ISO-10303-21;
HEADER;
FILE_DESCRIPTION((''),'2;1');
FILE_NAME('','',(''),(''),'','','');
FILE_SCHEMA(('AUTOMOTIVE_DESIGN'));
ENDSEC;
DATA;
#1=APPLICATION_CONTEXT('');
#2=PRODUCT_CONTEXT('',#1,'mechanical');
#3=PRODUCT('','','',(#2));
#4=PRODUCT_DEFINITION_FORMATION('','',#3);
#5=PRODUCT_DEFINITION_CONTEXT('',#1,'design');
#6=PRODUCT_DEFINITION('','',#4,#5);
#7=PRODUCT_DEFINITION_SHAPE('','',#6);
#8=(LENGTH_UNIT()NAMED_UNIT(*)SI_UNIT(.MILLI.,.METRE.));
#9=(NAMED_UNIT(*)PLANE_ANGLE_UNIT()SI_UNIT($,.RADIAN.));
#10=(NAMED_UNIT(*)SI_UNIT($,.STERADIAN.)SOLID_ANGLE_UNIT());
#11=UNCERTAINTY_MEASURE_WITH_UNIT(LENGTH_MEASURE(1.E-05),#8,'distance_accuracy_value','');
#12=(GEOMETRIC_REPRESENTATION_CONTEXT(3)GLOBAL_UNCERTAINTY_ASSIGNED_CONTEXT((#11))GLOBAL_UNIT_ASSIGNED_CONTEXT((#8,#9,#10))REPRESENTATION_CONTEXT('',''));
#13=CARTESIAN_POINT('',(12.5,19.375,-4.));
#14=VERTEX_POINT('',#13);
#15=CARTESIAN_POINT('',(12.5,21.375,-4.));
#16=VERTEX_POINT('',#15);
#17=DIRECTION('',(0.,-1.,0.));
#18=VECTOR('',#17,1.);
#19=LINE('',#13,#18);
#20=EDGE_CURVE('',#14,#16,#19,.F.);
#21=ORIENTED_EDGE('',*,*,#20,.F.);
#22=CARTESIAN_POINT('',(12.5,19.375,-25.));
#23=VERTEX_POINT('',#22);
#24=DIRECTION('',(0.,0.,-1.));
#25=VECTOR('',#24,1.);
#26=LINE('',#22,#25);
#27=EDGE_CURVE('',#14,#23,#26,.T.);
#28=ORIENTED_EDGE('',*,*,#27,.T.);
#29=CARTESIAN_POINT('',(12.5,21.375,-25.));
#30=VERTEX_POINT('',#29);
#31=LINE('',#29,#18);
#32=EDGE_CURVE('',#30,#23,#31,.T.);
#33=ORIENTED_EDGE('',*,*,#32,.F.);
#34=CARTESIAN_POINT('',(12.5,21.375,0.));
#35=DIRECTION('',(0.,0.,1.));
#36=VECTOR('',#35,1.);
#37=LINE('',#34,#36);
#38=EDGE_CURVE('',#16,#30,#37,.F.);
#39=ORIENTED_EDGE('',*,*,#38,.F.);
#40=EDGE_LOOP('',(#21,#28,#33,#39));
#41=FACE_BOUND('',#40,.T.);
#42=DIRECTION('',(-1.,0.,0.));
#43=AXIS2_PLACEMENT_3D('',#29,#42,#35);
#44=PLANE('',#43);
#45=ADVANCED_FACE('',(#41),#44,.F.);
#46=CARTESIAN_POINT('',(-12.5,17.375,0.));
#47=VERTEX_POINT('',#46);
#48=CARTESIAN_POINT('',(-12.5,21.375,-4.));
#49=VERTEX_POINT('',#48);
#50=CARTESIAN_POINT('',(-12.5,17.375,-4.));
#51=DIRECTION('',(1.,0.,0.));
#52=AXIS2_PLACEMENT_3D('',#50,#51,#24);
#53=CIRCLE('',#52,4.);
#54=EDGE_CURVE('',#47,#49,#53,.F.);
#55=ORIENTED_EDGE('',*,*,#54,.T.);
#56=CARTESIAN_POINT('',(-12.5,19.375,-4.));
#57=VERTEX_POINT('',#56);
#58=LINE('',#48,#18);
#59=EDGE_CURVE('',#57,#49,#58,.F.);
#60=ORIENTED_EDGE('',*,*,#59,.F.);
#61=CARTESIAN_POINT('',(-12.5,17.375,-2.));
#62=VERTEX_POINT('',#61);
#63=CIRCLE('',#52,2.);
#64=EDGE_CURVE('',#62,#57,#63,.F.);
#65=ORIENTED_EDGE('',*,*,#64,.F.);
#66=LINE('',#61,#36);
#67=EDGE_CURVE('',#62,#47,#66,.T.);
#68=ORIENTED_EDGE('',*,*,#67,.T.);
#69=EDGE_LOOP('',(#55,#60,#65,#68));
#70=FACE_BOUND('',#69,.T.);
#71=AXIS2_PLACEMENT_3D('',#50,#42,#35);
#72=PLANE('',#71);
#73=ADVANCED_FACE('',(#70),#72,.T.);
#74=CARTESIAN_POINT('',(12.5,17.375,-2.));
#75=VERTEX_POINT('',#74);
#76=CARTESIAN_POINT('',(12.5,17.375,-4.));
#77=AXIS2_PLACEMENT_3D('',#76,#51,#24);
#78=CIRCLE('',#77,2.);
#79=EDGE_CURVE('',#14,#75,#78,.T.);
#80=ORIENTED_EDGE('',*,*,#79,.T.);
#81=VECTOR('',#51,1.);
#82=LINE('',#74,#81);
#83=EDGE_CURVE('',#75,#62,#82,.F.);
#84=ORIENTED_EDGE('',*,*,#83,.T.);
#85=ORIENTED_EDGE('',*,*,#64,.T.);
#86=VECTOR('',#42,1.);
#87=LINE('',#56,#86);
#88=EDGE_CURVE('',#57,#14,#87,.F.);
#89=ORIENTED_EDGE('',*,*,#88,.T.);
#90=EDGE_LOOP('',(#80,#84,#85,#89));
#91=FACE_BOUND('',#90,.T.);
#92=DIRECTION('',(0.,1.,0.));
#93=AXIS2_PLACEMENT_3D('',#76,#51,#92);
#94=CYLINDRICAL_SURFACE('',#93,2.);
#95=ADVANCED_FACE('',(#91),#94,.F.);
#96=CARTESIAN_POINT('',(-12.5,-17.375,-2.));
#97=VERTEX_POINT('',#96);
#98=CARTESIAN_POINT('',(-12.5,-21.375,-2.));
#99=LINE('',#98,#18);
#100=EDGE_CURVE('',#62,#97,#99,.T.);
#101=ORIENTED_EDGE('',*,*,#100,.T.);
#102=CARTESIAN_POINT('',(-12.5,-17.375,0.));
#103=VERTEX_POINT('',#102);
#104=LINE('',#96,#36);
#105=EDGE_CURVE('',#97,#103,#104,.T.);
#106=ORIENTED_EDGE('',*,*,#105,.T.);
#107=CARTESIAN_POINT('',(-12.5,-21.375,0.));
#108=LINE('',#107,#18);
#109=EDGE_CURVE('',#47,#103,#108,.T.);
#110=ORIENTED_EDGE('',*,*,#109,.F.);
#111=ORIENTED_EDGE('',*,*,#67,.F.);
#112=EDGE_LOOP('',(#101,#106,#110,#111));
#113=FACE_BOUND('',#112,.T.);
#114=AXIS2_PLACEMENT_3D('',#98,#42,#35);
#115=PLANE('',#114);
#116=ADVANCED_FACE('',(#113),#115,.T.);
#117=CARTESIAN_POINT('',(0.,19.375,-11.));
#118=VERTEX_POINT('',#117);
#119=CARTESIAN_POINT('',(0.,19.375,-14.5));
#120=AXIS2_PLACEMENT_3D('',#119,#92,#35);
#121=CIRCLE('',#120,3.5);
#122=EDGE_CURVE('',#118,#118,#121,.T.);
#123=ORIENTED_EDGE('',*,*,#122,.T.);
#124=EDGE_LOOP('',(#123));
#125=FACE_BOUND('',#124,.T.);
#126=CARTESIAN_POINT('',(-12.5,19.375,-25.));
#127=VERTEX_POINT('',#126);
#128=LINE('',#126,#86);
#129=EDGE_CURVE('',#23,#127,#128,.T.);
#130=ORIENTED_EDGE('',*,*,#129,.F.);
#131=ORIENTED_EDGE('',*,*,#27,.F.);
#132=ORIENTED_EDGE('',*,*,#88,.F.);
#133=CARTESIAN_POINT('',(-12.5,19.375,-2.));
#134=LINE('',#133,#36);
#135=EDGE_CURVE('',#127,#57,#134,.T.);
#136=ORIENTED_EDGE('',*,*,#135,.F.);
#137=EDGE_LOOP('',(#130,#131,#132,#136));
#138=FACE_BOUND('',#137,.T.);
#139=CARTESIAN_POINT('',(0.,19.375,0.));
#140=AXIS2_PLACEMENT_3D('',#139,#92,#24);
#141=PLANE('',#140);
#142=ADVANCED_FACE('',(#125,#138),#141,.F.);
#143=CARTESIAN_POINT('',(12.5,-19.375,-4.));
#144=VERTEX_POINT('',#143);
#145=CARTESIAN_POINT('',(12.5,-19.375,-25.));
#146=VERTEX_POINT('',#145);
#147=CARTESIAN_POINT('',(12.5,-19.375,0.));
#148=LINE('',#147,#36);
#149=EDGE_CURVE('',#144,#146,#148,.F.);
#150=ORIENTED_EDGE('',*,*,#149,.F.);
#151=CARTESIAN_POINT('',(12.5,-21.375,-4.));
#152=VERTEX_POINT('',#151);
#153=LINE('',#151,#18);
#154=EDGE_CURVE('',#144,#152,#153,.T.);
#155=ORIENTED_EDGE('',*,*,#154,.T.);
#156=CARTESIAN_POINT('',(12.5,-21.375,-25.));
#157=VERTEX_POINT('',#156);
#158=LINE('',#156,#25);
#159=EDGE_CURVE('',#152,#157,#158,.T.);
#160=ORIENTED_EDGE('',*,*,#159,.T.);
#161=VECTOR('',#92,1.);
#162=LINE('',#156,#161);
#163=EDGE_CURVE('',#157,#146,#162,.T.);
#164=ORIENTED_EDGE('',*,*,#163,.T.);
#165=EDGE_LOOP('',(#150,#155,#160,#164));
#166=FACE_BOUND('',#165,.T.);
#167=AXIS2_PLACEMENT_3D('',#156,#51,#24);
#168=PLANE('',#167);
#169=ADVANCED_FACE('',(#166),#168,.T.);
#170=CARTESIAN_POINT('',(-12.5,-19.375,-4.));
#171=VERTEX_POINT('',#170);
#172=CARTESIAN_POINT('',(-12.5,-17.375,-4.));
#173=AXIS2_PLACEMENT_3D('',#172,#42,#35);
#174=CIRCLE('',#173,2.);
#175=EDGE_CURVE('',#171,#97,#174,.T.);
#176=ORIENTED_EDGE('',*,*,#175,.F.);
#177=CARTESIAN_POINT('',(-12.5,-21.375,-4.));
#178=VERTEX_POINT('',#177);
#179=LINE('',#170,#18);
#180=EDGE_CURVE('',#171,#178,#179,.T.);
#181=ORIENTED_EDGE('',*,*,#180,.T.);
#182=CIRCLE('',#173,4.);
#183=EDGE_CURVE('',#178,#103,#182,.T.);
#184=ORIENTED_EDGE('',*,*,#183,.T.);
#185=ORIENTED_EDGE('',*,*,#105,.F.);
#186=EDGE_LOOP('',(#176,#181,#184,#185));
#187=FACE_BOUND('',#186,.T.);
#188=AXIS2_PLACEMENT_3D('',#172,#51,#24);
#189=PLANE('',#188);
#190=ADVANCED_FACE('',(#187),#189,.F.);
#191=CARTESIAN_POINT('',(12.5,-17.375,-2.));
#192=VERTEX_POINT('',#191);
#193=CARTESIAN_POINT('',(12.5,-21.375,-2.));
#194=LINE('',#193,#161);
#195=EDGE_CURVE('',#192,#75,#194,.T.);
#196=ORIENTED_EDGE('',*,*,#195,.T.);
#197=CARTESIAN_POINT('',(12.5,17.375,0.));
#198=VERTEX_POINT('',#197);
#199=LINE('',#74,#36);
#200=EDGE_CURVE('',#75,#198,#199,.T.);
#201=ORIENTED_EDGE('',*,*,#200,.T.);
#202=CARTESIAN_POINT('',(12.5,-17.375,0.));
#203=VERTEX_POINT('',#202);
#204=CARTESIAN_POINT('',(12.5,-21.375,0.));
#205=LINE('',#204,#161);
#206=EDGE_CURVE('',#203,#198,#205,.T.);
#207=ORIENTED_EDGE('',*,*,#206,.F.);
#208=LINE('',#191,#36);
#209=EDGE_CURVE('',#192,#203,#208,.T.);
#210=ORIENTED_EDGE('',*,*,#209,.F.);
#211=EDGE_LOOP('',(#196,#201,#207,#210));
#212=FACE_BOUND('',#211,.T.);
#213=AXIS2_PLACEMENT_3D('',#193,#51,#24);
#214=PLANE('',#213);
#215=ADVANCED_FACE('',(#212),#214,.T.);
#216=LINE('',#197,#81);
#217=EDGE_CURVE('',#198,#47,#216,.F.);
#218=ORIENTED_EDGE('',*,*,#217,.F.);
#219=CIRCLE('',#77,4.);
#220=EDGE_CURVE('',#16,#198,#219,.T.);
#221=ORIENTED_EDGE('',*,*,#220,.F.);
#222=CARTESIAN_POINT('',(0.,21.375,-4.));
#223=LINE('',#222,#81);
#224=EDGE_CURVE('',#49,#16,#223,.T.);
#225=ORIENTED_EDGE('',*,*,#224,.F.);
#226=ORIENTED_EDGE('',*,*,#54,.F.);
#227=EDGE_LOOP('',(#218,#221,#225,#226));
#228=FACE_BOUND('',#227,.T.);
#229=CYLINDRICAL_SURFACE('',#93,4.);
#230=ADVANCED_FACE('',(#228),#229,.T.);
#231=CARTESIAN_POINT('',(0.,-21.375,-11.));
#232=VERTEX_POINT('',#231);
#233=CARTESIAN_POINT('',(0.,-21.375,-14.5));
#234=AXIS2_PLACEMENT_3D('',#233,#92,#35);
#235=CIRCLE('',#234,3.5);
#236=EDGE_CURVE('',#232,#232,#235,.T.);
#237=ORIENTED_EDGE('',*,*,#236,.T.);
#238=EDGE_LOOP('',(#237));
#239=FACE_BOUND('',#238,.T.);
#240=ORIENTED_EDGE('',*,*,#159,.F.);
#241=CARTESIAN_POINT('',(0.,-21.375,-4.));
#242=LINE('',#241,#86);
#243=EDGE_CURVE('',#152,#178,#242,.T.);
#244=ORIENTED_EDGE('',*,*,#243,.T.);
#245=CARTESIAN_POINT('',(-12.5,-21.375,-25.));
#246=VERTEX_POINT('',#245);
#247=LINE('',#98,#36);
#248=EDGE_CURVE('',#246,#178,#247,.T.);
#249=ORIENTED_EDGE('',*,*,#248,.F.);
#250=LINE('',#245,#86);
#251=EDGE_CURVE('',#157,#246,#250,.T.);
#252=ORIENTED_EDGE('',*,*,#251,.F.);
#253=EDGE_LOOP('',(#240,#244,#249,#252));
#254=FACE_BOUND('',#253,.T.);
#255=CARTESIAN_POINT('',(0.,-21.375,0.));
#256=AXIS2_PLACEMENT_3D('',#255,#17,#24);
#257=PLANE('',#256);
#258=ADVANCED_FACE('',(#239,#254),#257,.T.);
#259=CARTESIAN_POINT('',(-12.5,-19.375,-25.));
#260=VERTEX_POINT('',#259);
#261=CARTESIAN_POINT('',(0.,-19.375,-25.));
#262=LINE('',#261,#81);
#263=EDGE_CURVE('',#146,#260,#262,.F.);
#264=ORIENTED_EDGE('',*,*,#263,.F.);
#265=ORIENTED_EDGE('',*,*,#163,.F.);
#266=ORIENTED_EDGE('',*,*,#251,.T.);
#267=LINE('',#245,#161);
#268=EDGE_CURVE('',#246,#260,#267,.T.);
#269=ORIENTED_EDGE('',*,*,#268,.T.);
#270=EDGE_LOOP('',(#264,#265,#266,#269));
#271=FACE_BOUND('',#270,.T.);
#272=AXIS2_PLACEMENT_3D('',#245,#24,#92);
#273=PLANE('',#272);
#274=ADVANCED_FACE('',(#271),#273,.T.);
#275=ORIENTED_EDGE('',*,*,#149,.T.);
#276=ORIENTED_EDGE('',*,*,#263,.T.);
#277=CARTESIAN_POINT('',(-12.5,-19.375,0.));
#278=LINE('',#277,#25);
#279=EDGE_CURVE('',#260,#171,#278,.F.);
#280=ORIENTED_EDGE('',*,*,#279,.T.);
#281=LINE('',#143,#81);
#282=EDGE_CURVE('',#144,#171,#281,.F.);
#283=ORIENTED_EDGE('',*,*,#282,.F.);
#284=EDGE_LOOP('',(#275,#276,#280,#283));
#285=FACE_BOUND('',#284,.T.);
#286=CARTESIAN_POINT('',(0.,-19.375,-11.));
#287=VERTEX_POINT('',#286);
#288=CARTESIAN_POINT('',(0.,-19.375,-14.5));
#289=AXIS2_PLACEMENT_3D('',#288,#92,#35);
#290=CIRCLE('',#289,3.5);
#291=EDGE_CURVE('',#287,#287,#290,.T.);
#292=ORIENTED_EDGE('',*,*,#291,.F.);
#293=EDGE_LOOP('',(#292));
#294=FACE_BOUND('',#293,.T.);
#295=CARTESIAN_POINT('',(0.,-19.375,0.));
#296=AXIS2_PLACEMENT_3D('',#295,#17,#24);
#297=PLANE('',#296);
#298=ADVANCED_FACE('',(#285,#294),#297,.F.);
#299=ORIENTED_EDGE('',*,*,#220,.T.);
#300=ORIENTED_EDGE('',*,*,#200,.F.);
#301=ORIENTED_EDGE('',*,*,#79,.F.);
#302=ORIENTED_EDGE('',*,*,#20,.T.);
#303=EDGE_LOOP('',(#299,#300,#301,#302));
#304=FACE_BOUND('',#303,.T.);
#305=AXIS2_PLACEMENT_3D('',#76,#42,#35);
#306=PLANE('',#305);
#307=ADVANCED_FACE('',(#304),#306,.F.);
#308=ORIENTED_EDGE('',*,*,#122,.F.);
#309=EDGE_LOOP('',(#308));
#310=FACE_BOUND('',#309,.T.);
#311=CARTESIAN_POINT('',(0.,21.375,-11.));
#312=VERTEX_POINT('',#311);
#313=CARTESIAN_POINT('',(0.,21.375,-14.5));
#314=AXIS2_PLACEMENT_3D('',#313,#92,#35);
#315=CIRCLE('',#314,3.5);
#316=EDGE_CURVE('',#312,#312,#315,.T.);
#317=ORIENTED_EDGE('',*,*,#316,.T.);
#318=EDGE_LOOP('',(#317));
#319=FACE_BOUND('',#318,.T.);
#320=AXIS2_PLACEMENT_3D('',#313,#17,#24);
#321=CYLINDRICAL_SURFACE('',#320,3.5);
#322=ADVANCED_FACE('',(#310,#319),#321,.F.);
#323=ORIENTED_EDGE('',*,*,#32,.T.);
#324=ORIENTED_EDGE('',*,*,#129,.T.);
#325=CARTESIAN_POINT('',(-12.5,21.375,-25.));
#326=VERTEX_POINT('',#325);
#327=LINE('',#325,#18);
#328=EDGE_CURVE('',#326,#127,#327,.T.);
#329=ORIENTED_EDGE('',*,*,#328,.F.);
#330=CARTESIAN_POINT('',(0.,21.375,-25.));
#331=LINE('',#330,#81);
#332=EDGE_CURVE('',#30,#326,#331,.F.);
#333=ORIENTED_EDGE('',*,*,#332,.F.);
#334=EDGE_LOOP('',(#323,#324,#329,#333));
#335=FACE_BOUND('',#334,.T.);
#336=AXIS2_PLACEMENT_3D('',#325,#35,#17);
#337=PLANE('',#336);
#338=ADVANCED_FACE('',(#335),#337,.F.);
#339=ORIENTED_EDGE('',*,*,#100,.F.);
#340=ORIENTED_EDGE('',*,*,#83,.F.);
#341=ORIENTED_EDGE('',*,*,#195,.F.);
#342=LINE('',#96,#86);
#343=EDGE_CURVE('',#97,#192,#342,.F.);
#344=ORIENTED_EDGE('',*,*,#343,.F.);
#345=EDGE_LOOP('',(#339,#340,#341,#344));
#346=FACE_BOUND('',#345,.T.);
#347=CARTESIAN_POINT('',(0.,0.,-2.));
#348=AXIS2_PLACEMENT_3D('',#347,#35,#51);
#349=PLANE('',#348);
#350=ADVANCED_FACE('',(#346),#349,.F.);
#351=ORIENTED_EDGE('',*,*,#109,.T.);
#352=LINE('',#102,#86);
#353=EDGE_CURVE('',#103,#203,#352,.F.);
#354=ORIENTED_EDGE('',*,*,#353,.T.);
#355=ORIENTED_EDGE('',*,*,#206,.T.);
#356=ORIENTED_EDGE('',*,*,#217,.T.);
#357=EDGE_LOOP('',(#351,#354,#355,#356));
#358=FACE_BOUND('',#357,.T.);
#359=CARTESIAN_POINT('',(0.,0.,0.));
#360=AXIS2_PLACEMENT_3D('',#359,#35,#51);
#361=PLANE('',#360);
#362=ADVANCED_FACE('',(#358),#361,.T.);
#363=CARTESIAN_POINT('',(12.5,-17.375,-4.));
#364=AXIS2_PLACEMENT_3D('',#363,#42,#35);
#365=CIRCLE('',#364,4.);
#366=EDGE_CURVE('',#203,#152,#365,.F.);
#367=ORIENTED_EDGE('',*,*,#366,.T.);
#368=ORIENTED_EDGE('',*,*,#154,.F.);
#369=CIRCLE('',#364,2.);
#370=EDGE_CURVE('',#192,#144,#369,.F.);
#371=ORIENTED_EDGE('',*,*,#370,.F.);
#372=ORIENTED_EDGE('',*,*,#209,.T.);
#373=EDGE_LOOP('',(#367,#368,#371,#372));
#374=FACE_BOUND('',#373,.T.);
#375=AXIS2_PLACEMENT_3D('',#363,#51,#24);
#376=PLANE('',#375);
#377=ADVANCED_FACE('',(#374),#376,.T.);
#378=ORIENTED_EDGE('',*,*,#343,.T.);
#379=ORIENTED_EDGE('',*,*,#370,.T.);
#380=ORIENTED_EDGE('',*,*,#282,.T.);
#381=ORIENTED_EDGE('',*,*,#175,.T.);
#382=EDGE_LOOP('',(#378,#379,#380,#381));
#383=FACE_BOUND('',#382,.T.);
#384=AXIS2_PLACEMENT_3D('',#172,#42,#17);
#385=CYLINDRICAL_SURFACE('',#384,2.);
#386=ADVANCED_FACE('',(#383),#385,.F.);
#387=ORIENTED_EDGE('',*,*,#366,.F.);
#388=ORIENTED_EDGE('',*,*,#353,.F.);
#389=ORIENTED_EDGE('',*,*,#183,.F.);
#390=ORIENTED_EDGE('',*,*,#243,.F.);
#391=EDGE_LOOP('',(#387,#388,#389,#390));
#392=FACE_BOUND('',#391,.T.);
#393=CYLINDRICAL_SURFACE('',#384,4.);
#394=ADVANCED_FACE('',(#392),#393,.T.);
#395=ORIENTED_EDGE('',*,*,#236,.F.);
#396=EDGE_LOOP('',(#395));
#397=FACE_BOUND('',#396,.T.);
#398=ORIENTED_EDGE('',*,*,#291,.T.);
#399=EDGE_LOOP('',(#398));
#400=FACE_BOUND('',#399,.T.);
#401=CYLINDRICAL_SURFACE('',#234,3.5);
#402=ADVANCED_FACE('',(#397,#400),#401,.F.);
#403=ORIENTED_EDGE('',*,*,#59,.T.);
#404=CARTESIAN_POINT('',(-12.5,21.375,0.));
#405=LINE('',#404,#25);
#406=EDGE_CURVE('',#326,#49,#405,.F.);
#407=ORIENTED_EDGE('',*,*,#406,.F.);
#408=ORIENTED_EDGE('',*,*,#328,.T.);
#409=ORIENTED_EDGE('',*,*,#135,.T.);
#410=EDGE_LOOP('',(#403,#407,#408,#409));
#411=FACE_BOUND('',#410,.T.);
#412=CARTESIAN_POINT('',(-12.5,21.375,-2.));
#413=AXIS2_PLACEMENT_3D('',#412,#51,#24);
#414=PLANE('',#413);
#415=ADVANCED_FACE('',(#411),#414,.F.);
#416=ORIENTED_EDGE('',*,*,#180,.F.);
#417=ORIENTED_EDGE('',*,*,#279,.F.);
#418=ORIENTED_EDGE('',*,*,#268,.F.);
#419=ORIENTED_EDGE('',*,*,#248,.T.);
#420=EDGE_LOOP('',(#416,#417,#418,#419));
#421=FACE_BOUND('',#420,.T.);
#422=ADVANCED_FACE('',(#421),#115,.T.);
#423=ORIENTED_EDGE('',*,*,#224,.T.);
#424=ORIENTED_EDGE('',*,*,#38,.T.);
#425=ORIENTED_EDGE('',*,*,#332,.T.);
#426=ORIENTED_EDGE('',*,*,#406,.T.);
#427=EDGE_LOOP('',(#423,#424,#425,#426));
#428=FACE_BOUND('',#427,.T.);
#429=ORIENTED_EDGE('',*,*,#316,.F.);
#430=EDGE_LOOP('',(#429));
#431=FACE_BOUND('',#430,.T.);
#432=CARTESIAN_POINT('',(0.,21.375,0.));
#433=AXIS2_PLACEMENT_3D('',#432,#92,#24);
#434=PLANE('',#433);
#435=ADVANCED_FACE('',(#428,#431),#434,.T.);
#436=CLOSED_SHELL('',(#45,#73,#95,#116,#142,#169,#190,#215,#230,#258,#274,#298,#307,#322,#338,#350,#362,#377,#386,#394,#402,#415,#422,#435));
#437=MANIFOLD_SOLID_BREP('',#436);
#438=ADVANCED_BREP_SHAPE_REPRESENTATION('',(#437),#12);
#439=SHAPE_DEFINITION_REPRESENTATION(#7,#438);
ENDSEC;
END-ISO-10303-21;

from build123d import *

# Parameters (mm, degrees)
SKETCH1_W                    = 25
SKETCH1_H                    = 42.75
BASE_FLANGE2_DEPTH           = 2
EDGE_FLANGE1_STRIP_W         = 12
EDGE_FLANGE1_STRIP_H         = 2
EDGE_FLANGE1_STRIP_CUT_DEPTH = 25
EDGE_FLANGE1_DEPTH           = 25
SKETCH14_R                   = 3.5
CUT_EXTRUDE2_DEPTH           = 50.41469923


# Sheet-metal steps are written as plain solids
with BuildPart() as part:
    # Sketch1 → Base-Flange2 (new body)
    with BuildSketch(Plane.XY):
        Rectangle(SKETCH1_W, SKETCH1_H)
    extrude(amount=-BASE_FLANGE2_DEPTH)

    # Edge-Flange1 strip (across the edge) → Edge-Flange1 strip cut (cut)
    with BuildSketch(Plane(origin=(12.5, -21.375, -2), x_dir=(0, 1, 0), z_dir=(-1, 0, 0))):
        with Locations((-2, -1)):
            Rectangle(EDGE_FLANGE1_STRIP_W, EDGE_FLANGE1_STRIP_H)
    edge_flange1_strip_cut = extrude(amount=EDGE_FLANGE1_STRIP_CUT_DEPTH, mode=Mode.SUBTRACT)

    # Edge-Flange1 section (across the edge) → Edge-Flange1 (add)
    with BuildSketch(Plane(origin=(12.5, -21.375, -2), x_dir=(0, 1, 0), z_dir=(-1, 0, 0))):
        with BuildLine():
            Line((0, 2), (0, 23))
            Line((0, 23), (2, 23))
            Line((2, 23), (2, 2))
            ThreePointArc((2, 2), (2.585786438, 0.585786438), (4, 0))
            Line((4, 0), (4, -2))
            ThreePointArc((4, -2), (1.171572875, -0.828427125), (0, 2))
        make_face()
    edge_flange1 = extrude(amount=EDGE_FLANGE1_DEPTH)

    # Sketch14 → Cut-Extrude2 (cut, through all)
    with BuildSketch(Plane(origin=(0, -19.375, 0), x_dir=(1, 0, 0), z_dir=(0, 1, 0))):
        with Locations(Location((0, 14.5, 0), (0, 0, 270))):
            Circle(SKETCH14_R)
    cut_extrude2 = extrude(amount=-CUT_EXTRUDE2_DEPTH, mode=Mode.SUBTRACT)

    # Mirror1: Edge-Flange1 strip cut, Edge-Flange1, Cut-Extrude2 across plane
    add(edge_flange1_strip_cut.mirror(Plane.ZX), mode=Mode.SUBTRACT)
    add(edge_flange1.mirror(Plane.ZX))
    add(cut_extrude2.mirror(Plane.ZX), mode=Mode.SUBTRACT)


solid = part.part
